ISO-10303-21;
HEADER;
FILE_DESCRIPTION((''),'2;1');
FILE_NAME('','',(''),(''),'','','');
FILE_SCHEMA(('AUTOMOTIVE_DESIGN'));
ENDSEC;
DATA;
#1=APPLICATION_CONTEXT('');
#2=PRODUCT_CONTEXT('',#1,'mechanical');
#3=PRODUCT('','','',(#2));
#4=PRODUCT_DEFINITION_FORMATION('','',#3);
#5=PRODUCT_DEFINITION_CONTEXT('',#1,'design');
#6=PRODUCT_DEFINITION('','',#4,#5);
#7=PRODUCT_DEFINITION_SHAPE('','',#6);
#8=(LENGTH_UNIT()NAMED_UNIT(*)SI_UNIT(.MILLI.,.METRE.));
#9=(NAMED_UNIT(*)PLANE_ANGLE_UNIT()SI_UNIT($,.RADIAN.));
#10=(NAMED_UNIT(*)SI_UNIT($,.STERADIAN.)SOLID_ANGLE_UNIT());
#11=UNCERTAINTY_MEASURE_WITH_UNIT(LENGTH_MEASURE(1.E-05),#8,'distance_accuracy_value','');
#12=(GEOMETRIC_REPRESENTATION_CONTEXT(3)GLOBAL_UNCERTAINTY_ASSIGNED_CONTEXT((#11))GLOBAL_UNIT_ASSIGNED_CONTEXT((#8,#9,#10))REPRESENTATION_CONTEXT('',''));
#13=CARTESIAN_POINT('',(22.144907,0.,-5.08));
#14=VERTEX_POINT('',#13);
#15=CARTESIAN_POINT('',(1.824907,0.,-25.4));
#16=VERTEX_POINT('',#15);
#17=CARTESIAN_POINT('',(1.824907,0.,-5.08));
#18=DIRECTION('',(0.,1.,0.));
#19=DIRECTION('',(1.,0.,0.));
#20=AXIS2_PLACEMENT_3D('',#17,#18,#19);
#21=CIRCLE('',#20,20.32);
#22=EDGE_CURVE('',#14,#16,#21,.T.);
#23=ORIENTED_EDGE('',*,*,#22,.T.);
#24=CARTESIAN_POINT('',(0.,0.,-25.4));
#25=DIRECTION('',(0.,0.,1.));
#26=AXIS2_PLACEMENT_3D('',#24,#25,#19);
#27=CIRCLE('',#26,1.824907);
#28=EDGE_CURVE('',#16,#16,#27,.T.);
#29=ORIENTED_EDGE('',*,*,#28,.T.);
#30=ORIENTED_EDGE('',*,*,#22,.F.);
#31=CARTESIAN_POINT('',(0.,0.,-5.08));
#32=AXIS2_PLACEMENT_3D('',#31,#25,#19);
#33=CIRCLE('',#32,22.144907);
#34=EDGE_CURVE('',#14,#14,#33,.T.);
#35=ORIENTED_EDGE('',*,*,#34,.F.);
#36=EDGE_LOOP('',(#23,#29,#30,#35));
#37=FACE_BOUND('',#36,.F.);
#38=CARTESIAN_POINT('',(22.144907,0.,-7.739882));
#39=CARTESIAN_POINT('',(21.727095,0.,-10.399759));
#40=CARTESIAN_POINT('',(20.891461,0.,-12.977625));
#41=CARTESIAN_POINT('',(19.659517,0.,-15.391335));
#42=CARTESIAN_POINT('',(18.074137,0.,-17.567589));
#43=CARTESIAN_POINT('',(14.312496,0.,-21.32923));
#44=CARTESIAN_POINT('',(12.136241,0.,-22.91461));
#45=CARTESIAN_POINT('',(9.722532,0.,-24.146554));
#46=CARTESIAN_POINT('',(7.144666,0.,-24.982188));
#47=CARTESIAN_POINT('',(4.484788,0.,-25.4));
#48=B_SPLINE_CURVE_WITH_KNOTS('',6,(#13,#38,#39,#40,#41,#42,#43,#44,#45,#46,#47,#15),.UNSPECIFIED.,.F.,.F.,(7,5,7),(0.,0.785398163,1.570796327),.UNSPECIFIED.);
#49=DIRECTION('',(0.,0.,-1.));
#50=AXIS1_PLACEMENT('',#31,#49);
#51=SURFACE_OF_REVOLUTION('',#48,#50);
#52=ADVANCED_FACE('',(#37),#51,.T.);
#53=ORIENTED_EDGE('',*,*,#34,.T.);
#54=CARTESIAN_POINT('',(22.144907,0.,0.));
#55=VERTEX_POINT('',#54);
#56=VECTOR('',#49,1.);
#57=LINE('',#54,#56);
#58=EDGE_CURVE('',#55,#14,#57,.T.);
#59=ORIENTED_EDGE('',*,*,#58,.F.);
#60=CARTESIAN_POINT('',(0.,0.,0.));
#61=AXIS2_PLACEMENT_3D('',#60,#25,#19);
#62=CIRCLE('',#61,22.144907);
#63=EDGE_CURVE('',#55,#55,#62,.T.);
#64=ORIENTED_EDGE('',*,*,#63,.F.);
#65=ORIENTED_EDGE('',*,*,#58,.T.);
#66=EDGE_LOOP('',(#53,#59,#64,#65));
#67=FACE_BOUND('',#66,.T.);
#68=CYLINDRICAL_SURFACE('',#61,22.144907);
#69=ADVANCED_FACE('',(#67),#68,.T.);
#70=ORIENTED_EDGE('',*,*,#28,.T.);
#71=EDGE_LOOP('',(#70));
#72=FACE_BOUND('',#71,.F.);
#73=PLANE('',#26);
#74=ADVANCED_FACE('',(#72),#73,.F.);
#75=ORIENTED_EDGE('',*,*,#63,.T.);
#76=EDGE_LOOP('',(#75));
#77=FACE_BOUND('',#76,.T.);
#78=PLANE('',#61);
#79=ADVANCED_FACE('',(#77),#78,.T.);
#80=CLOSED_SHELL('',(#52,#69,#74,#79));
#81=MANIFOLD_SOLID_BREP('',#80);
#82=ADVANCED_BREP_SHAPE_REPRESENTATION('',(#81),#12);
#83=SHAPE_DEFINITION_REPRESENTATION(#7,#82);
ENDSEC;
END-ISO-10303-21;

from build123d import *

# Parameters (mm, degrees)
F2_R     = 22.1449066967
F3_DEPTH = 25.4
F4_R     = 20.32


# Not quite as in the source:
# - the program builds the solid bodies; features that only make, move or delete a surface that nothing else refers to are left out


with BuildPart() as f3:
    # F2 (on Top) → F3 (new body)
    with BuildSketch(Plane.XY):
        Circle(F2_R)
    extrude(amount=-F3_DEPTH)

    # F4
    f4_edges = [f3.edges().sort_by_distance(p)[0] for p in [
        (-22.144907, 0, -25.4),
    ]]
    fillet(f4_edges, radius=F4_R)


solid = f3.part
